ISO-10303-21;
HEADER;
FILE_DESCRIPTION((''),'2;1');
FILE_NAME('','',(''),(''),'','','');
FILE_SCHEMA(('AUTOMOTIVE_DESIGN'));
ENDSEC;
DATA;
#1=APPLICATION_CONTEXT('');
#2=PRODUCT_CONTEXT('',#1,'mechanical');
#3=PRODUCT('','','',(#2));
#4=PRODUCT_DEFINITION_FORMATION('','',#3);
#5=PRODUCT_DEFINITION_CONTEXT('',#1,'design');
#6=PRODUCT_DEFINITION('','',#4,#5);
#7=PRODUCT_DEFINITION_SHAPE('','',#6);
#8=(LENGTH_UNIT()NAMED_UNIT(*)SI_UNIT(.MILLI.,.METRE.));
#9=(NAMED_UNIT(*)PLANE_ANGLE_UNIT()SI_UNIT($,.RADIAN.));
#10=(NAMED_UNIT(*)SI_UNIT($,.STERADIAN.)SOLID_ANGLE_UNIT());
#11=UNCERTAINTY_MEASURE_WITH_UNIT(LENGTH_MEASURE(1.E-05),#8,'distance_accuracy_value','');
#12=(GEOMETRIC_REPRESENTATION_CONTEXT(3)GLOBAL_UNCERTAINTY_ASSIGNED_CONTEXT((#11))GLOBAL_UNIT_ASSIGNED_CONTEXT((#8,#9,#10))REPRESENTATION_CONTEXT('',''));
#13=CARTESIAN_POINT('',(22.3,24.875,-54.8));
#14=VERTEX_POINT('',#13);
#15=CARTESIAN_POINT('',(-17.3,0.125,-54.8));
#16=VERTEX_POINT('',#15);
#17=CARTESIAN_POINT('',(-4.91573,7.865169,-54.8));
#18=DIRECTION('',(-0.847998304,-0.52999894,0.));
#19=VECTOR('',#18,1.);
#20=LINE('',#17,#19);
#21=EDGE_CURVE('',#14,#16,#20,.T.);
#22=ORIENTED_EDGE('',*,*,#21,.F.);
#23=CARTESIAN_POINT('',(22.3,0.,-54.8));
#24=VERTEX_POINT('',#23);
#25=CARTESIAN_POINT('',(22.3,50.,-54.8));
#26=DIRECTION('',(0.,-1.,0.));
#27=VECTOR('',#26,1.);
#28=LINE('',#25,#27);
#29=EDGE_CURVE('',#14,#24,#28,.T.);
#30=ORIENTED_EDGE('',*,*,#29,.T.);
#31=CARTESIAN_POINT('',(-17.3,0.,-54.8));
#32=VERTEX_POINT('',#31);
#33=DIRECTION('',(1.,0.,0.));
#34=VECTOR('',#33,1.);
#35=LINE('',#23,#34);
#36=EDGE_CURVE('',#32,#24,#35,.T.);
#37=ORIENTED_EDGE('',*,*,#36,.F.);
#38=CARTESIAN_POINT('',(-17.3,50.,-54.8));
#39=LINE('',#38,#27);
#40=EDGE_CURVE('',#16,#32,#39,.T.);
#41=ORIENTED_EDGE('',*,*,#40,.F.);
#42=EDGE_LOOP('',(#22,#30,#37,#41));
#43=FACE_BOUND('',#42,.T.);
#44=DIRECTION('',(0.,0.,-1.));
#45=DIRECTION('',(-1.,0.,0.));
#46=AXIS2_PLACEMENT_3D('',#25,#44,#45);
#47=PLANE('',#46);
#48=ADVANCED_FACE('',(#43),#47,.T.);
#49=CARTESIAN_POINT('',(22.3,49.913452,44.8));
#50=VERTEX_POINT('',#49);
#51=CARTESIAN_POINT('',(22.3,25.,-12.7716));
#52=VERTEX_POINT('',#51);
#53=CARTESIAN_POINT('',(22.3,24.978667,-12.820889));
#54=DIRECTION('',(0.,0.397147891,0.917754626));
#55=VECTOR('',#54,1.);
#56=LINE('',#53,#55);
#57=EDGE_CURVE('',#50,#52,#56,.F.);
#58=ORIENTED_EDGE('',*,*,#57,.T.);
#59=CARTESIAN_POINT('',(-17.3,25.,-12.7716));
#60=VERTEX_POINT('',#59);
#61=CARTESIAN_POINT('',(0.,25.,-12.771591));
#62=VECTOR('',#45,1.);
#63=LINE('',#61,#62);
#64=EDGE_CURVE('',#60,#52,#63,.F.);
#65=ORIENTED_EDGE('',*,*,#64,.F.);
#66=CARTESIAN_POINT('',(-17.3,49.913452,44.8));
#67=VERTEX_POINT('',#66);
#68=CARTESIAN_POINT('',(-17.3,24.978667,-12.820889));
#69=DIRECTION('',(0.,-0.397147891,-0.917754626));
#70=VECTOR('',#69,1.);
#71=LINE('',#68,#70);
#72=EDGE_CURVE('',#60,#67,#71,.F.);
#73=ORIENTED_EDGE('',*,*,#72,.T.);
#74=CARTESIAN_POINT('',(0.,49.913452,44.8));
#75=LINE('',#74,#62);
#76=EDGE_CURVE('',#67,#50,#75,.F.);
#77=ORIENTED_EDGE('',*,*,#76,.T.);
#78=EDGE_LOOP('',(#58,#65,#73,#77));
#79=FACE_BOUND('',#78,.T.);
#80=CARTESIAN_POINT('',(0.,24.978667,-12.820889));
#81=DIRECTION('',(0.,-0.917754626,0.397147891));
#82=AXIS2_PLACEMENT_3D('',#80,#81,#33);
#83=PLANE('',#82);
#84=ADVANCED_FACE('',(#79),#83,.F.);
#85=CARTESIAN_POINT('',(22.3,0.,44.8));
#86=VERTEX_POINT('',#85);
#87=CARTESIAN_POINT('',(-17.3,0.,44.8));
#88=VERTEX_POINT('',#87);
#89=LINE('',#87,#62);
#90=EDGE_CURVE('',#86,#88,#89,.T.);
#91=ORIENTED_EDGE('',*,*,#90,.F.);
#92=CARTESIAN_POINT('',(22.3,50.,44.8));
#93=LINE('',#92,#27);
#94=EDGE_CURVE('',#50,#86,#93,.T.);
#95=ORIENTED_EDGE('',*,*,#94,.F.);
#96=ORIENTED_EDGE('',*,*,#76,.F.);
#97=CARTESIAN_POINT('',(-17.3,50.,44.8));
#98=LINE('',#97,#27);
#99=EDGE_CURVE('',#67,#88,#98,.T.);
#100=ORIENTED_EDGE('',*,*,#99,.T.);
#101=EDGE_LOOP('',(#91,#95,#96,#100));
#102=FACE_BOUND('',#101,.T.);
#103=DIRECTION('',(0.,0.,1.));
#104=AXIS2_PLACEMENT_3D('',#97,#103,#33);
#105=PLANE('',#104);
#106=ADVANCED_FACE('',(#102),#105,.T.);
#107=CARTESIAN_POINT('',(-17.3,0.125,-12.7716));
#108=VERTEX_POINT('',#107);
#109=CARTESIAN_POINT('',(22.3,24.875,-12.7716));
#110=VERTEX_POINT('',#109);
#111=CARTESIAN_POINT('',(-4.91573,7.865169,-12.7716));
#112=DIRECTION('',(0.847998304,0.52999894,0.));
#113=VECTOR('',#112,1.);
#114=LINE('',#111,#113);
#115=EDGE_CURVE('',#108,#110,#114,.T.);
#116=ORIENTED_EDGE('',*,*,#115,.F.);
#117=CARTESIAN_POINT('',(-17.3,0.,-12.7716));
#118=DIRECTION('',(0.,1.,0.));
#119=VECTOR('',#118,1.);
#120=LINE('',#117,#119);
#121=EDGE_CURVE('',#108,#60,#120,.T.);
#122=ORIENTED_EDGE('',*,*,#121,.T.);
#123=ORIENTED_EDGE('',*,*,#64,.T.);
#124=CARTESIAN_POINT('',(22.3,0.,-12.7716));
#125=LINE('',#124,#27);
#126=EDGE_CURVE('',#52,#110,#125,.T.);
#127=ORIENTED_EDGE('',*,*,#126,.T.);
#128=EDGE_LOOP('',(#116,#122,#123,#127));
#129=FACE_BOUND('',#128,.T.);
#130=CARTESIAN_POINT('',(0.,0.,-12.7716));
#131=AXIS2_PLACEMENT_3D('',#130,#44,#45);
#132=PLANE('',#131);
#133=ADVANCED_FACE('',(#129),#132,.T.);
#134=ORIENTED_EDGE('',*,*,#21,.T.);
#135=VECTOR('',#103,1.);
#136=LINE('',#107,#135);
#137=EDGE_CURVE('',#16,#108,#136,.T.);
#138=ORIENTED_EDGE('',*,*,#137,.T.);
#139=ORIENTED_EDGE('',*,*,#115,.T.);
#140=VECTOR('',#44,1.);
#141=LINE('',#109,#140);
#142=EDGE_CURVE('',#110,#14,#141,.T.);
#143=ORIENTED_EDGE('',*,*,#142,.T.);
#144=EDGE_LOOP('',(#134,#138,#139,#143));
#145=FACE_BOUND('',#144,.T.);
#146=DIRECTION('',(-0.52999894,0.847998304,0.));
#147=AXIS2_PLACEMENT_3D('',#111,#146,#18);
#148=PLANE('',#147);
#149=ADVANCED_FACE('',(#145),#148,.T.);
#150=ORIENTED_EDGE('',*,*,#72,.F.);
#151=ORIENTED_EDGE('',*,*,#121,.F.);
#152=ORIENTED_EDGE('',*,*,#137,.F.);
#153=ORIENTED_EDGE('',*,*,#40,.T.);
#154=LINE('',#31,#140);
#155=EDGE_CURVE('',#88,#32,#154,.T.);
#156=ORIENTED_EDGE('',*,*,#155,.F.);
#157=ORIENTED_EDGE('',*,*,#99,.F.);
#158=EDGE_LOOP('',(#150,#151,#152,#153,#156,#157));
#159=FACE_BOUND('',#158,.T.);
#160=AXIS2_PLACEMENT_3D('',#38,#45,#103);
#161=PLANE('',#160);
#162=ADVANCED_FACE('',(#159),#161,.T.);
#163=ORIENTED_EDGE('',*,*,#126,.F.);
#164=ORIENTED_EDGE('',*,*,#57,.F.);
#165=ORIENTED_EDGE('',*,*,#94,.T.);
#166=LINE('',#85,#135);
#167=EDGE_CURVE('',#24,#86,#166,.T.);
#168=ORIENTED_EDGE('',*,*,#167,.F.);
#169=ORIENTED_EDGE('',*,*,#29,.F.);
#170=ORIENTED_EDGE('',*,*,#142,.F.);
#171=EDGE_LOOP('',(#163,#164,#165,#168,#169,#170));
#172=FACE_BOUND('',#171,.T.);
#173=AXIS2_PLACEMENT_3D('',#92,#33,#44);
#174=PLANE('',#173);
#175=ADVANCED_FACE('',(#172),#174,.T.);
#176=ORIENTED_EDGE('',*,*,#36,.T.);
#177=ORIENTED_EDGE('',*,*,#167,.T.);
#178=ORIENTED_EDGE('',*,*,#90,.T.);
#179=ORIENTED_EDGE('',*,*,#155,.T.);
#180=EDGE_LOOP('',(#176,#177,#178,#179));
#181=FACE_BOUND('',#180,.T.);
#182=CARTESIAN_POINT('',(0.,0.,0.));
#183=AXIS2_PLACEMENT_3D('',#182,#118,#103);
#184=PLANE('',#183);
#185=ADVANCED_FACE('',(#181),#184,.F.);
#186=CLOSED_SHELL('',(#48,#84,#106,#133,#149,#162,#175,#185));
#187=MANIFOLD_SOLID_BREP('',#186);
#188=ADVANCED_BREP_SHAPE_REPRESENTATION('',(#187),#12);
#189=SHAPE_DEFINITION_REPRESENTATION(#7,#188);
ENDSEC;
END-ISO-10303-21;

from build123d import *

# Parameters (mm, degrees)
SKETCH2_W           = 40
SKETCH2_H           = 5
SKETCH2_W_2         = 5
SKETCH2_H_2         = 100
BOSS_EXTRUDE1_DEPTH = 30
SKETCH3_W           = 3
SKETCH3_H           = 3
CUT_EXTRUDE1_DEPTH  = 5
SKETCH2_4_W         = 40
SKETCH2_4_H         = 100
BOSS_EXTRUDE2_DEPTH = 5
CUT_EXTRUDE2_DEPTH  = 25
BOSS_EXTRUDE3_DEPTH = 25
SKETCH10_W          = 40
SKETCH10_H          = 5
BOSS_EXTRUDE4_DEPTH = 35
SKETCH11_W          = 5
SKETCH11_H          = 5
CUT_EXTRUDE5_DEPTH  = 6
SKETCH11_4_W        = 5
SKETCH11_4_H        = 5
CUT_EXTRUDE6_DEPTH  = 4.99
BOSS_EXTRUDE5_DEPTH = 50
SKETCH12_3_W        = 40
SKETCH12_3_H        = 42.17911114
BOSS_EXTRUDE6_DEPTH = 25
CHAMFER1_SIZE       = 25.021332939
CHAMFER1_SIZE_2     = 57.82088886
CUT_EXTRUDE7_DEPTH  = 42.2284
SKETCH15_W          = 50
SKETCH15_H          = 110
CUT_EXTRUDE8_DEPTH  = 40
SKETCH16_W          = 40
SKETCH16_H          = 100
SKETCH16_W_2        = 39.6
SKETCH16_H_2        = 99.6
CUT_EXTRUDE9_DEPTH  = 50


with BuildPart() as part:
    # Sketch2 → Boss-Extrude1 (new body)
    with BuildSketch(Plane(origin=(0, 0, 0), x_dir=(1, 0, 0), z_dir=(0, 1, 0))):
        Polygon((-22.5, 60), (-22.5, -50), (-17.5, -50), (-17.5, -45), (-17.5, 55), (-17.5, 60), align=None)
        with Locations((2.5, 57.5)):
            Rectangle(SKETCH2_W, SKETCH2_H)
        with Locations((25, 57.5)):
            Rectangle(SKETCH2_W_2, SKETCH2_H)
        with Locations((25, 5)):
            Rectangle(SKETCH2_W_2, SKETCH2_H_2)
        with Locations((25, -47.5)):
            Rectangle(SKETCH2_W_2, SKETCH2_H)
        with Locations((2.5, -47.5)):
            Rectangle(SKETCH2_W, SKETCH2_H)
    extrude(amount=-BOSS_EXTRUDE1_DEPTH)

    # Sketch3 → Cut-Extrude1 (cut)
    with BuildSketch(Plane.ZY.offset(22.5)):
        Polygon((-35, -25), (-35, -28), (-32, -28), (-32, -22), (-38, -22), (-38, -25), align=None)
        with Locations((-36.5, -26.5)):
            Rectangle(SKETCH3_W, SKETCH3_H)
    extrude(amount=-CUT_EXTRUDE1_DEPTH, mode=Mode.SUBTRACT)

    # Sketch2<4> → Boss-Extrude2 (add)
    with BuildSketch(Plane(origin=(0, 0, 0), x_dir=(1, 0, 0), z_dir=(0, 1, 0))):
        with Locations((2.5, 5)):
            Rectangle(SKETCH2_4_W, SKETCH2_4_H)
    extrude(amount=-BOSS_EXTRUDE2_DEPTH)

    # Sketch5 → Cut-Extrude2 (cut)
    with BuildSketch(Plane.XZ.offset(30)):
        Polygon((27.5, 50), (-22.5, 50), (-22.5, 45), (-17.5, 45), (17.5, 45), (22.5, 45), (22.5, -55), (17.5, -55), (-17.5, -55), (-22.5, -55), (-22.5, -60), (27.5, -60), align=None)
    extrude(amount=-CUT_EXTRUDE2_DEPTH, mode=Mode.SUBTRACT)

    # Sketch5<3> → Boss-Extrude3 (add)
    with BuildSketch(Plane.XZ.offset(30)):
        Polygon((17.5, 45), (-17.5, 45), (-17.5, 40), (12.5, 40), (12.5, -50), (-17.5, -50), (-17.5, -55), (17.5, -55), align=None)
    extrude(amount=-BOSS_EXTRUDE3_DEPTH)

    # Sketch10 → Boss-Extrude4 (add)
    with BuildSketch(Plane.XZ.offset(5)):
        with Locations((-2.5, 47.5)):
            Rectangle(SKETCH10_W, SKETCH10_H)
        with Locations((-2.5, -57.5)):
            Rectangle(SKETCH10_W, SKETCH10_H)
    extrude(amount=BOSS_EXTRUDE4_DEPTH)

    # Sketch11 → Cut-Extrude5 (cut)
    with BuildSketch(Plane(origin=(0, 0, 0), x_dir=(1, 0, 0), z_dir=(0, 1, 0))):
        with Locations((25, 52.5)):
            Rectangle(SKETCH11_W, SKETCH11_H)
        Polygon((27.5, 7.5), (22.5, 7.5), (22.5, 5), (22.5, 2.5), (27.5, 2.5), (27.5, 5), align=None)
        Polygon((27.5, -45), (27.5, -40), (24, -40), (23.5, -40), (22.5, -40), (22.5, -41), (22.5, -41.5), (22.5, -45), align=None)
    extrude(amount=-CUT_EXTRUDE5_DEPTH, mode=Mode.SUBTRACT)

    # Sketch11<4> → Cut-Extrude6 (cut)
    with BuildSketch(Plane(origin=(0, 0, 0), x_dir=(1, 0, 0), z_dir=(0, 1, 0))):
        Polygon((-17.5, 7.5), (-22.5, 7.5), (-22.5, 5), (-22.5, 2.5), (-17.5, 2.5), align=None)
        with Locations((-20, -42.5)):
            Rectangle(SKETCH11_4_W, SKETCH11_4_H)
    extrude(amount=-CUT_EXTRUDE6_DEPTH, mode=Mode.SUBTRACT)

    # Sketch12 → Boss-Extrude5 (add)
    with BuildSketch(Plane(origin=(0, 0, 0), x_dir=(1, 0, 0), z_dir=(0, 1, 0))):
        Polygon((22.5, 12.82088886), (-17.5, 12.82088886), (-17.5, 7.5), (-17.5, 2.5), (-17.5, -40), (-17.5, -45), (22.5, -45), (22.5, -40), (22.5, 2.5), (22.5, 7.5), align=None)
    extrude(amount=BOSS_EXTRUDE5_DEPTH)

    # Sketch12<3> → Boss-Extrude6 (add)
    with BuildSketch(Plane(origin=(0, 0, 0), x_dir=(1, 0, 0), z_dir=(0, 1, 0))):
        with Locations((2.5, 33.91044443)):
            Rectangle(SKETCH12_3_W, SKETCH12_3_H)
    extrude(amount=BOSS_EXTRUDE6_DEPTH)

    # Chamfer1
    # the kernel refuses this chamfer: 57.82088886, 25.021332939 mm, written as the material it takes off along each edge
    with BuildSketch(Plane(origin=(172.37635383, 50, -12.82088886), x_dir=(0, -0.9966687843763375, -0.08155571255156512), z_dir=(-1, 0, 0))) as chamfer1_piece_1_section:
        Polygon((CHAMFER1_SIZE * 0.996668784369, CHAMFER1_SIZE * 0.081555712551), (-CHAMFER1_SIZE_2 * 0.0815557125516, CHAMFER1_SIZE_2 * 0.996668784376), (0, 0), align=None)
    chamfer1_piece_1 = extrude(amount=339.752707661, mode=Mode.PRIVATE)
    chamfer1_piece_1 = split(chamfer1_piece_1, bisect_by=Plane(origin=(2.5, 25, 6.452754758), z_dir=(0, 1, 0)), keep=Keep.TOP, mode=Mode.PRIVATE)
    add(chamfer1_piece_1, mode=Mode.SUBTRACT)

    # Sketch14 → Cut-Extrude7 (cut)
    with BuildSketch(Plane(origin=(0, 0, -55), x_dir=(-1, 0, 0), z_dir=(0, 0, -1))):
        Polygon((-22.5, 25), (17.5, 0), (17.5, 25), align=None)
    extrude(amount=-CUT_EXTRUDE7_DEPTH, mode=Mode.SUBTRACT)

    # Sketch15 → Cut-Extrude8 (cut)
    with BuildSketch(Plane.XZ.offset(40)):
        with Locations((2.5, -5)):
            Rectangle(SKETCH15_W, SKETCH15_H)
    extrude(amount=-CUT_EXTRUDE8_DEPTH, mode=Mode.SUBTRACT)

    # Sketch16 → Cut-Extrude9 (cut)
    with BuildSketch(Plane.XZ):
        with Locations((2.5, -5)):
            Rectangle(SKETCH16_W, SKETCH16_H)
        with Locations((2.5, -5)):
            Rectangle(SKETCH16_W_2, SKETCH16_H_2, mode=Mode.SUBTRACT)
    extrude(amount=-CUT_EXTRUDE9_DEPTH, mode=Mode.SUBTRACT)


solid = part.part
